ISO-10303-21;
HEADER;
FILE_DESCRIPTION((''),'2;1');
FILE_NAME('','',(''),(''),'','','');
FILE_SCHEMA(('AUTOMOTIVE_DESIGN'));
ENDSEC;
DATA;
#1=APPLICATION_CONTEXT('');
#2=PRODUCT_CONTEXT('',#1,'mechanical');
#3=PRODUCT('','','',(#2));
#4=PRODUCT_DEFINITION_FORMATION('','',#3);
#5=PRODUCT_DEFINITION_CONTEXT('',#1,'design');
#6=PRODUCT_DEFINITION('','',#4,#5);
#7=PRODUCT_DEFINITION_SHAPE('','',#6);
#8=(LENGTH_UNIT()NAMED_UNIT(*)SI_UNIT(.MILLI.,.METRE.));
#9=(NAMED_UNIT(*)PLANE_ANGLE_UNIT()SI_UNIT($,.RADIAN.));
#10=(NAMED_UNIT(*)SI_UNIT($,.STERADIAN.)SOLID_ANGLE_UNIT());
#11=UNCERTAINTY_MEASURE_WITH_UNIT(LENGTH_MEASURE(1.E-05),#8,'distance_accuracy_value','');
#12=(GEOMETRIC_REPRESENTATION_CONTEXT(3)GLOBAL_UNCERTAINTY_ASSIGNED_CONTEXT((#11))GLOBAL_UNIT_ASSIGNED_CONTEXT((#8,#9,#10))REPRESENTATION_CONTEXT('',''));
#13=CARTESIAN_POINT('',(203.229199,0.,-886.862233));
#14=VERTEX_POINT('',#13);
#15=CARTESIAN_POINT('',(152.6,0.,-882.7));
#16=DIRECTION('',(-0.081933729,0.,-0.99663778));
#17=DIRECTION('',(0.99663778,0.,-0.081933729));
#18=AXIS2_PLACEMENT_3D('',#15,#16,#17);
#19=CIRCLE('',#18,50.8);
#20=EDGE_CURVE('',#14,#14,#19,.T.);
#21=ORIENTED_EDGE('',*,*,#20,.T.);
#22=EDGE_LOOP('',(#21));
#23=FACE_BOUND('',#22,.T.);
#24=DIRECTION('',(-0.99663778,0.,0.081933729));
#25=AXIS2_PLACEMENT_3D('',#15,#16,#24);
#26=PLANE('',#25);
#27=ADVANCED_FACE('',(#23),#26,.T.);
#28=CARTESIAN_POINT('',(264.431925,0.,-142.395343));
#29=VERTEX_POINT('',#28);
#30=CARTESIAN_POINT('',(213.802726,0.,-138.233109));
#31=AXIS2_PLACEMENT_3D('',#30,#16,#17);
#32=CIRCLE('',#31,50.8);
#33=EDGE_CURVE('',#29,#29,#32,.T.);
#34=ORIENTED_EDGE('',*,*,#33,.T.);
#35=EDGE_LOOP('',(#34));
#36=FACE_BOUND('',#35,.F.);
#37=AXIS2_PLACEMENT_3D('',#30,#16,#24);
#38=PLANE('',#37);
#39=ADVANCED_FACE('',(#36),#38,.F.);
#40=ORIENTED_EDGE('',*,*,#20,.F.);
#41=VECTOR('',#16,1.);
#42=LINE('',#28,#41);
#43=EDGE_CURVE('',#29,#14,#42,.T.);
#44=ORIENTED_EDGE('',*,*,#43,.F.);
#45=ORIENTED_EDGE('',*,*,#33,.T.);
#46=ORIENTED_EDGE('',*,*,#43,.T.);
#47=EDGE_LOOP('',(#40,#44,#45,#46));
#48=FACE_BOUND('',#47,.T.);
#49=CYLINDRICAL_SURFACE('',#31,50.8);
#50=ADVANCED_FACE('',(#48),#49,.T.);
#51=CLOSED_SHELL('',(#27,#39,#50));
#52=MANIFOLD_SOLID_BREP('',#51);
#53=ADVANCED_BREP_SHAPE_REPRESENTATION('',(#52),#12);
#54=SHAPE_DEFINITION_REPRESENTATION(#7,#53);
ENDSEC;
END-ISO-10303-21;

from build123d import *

# Parameters (mm, degrees)
F2_R = 50.8


with BuildPart() as f3:
    # F3: sweep along a path in F0
    with BuildLine(Plane.XZ) as f3_path:
        Line((213.8027258659, -138.2331094519), (152.6, -882.7))
    # F2 (on face) → F3 (sweep)
    with BuildSketch(Plane(origin=(-40.453949994, 0, -492.0798205685), x_dir=(0.9966377797, 0, -0.0819337295), z_dir=(-0.0819337295, 0, -0.9966377797))):
        with Locations((224.4098282015, 0)):
            Circle(F2_R)
    sweep(path=f3_path.line)


solid = f3.part
